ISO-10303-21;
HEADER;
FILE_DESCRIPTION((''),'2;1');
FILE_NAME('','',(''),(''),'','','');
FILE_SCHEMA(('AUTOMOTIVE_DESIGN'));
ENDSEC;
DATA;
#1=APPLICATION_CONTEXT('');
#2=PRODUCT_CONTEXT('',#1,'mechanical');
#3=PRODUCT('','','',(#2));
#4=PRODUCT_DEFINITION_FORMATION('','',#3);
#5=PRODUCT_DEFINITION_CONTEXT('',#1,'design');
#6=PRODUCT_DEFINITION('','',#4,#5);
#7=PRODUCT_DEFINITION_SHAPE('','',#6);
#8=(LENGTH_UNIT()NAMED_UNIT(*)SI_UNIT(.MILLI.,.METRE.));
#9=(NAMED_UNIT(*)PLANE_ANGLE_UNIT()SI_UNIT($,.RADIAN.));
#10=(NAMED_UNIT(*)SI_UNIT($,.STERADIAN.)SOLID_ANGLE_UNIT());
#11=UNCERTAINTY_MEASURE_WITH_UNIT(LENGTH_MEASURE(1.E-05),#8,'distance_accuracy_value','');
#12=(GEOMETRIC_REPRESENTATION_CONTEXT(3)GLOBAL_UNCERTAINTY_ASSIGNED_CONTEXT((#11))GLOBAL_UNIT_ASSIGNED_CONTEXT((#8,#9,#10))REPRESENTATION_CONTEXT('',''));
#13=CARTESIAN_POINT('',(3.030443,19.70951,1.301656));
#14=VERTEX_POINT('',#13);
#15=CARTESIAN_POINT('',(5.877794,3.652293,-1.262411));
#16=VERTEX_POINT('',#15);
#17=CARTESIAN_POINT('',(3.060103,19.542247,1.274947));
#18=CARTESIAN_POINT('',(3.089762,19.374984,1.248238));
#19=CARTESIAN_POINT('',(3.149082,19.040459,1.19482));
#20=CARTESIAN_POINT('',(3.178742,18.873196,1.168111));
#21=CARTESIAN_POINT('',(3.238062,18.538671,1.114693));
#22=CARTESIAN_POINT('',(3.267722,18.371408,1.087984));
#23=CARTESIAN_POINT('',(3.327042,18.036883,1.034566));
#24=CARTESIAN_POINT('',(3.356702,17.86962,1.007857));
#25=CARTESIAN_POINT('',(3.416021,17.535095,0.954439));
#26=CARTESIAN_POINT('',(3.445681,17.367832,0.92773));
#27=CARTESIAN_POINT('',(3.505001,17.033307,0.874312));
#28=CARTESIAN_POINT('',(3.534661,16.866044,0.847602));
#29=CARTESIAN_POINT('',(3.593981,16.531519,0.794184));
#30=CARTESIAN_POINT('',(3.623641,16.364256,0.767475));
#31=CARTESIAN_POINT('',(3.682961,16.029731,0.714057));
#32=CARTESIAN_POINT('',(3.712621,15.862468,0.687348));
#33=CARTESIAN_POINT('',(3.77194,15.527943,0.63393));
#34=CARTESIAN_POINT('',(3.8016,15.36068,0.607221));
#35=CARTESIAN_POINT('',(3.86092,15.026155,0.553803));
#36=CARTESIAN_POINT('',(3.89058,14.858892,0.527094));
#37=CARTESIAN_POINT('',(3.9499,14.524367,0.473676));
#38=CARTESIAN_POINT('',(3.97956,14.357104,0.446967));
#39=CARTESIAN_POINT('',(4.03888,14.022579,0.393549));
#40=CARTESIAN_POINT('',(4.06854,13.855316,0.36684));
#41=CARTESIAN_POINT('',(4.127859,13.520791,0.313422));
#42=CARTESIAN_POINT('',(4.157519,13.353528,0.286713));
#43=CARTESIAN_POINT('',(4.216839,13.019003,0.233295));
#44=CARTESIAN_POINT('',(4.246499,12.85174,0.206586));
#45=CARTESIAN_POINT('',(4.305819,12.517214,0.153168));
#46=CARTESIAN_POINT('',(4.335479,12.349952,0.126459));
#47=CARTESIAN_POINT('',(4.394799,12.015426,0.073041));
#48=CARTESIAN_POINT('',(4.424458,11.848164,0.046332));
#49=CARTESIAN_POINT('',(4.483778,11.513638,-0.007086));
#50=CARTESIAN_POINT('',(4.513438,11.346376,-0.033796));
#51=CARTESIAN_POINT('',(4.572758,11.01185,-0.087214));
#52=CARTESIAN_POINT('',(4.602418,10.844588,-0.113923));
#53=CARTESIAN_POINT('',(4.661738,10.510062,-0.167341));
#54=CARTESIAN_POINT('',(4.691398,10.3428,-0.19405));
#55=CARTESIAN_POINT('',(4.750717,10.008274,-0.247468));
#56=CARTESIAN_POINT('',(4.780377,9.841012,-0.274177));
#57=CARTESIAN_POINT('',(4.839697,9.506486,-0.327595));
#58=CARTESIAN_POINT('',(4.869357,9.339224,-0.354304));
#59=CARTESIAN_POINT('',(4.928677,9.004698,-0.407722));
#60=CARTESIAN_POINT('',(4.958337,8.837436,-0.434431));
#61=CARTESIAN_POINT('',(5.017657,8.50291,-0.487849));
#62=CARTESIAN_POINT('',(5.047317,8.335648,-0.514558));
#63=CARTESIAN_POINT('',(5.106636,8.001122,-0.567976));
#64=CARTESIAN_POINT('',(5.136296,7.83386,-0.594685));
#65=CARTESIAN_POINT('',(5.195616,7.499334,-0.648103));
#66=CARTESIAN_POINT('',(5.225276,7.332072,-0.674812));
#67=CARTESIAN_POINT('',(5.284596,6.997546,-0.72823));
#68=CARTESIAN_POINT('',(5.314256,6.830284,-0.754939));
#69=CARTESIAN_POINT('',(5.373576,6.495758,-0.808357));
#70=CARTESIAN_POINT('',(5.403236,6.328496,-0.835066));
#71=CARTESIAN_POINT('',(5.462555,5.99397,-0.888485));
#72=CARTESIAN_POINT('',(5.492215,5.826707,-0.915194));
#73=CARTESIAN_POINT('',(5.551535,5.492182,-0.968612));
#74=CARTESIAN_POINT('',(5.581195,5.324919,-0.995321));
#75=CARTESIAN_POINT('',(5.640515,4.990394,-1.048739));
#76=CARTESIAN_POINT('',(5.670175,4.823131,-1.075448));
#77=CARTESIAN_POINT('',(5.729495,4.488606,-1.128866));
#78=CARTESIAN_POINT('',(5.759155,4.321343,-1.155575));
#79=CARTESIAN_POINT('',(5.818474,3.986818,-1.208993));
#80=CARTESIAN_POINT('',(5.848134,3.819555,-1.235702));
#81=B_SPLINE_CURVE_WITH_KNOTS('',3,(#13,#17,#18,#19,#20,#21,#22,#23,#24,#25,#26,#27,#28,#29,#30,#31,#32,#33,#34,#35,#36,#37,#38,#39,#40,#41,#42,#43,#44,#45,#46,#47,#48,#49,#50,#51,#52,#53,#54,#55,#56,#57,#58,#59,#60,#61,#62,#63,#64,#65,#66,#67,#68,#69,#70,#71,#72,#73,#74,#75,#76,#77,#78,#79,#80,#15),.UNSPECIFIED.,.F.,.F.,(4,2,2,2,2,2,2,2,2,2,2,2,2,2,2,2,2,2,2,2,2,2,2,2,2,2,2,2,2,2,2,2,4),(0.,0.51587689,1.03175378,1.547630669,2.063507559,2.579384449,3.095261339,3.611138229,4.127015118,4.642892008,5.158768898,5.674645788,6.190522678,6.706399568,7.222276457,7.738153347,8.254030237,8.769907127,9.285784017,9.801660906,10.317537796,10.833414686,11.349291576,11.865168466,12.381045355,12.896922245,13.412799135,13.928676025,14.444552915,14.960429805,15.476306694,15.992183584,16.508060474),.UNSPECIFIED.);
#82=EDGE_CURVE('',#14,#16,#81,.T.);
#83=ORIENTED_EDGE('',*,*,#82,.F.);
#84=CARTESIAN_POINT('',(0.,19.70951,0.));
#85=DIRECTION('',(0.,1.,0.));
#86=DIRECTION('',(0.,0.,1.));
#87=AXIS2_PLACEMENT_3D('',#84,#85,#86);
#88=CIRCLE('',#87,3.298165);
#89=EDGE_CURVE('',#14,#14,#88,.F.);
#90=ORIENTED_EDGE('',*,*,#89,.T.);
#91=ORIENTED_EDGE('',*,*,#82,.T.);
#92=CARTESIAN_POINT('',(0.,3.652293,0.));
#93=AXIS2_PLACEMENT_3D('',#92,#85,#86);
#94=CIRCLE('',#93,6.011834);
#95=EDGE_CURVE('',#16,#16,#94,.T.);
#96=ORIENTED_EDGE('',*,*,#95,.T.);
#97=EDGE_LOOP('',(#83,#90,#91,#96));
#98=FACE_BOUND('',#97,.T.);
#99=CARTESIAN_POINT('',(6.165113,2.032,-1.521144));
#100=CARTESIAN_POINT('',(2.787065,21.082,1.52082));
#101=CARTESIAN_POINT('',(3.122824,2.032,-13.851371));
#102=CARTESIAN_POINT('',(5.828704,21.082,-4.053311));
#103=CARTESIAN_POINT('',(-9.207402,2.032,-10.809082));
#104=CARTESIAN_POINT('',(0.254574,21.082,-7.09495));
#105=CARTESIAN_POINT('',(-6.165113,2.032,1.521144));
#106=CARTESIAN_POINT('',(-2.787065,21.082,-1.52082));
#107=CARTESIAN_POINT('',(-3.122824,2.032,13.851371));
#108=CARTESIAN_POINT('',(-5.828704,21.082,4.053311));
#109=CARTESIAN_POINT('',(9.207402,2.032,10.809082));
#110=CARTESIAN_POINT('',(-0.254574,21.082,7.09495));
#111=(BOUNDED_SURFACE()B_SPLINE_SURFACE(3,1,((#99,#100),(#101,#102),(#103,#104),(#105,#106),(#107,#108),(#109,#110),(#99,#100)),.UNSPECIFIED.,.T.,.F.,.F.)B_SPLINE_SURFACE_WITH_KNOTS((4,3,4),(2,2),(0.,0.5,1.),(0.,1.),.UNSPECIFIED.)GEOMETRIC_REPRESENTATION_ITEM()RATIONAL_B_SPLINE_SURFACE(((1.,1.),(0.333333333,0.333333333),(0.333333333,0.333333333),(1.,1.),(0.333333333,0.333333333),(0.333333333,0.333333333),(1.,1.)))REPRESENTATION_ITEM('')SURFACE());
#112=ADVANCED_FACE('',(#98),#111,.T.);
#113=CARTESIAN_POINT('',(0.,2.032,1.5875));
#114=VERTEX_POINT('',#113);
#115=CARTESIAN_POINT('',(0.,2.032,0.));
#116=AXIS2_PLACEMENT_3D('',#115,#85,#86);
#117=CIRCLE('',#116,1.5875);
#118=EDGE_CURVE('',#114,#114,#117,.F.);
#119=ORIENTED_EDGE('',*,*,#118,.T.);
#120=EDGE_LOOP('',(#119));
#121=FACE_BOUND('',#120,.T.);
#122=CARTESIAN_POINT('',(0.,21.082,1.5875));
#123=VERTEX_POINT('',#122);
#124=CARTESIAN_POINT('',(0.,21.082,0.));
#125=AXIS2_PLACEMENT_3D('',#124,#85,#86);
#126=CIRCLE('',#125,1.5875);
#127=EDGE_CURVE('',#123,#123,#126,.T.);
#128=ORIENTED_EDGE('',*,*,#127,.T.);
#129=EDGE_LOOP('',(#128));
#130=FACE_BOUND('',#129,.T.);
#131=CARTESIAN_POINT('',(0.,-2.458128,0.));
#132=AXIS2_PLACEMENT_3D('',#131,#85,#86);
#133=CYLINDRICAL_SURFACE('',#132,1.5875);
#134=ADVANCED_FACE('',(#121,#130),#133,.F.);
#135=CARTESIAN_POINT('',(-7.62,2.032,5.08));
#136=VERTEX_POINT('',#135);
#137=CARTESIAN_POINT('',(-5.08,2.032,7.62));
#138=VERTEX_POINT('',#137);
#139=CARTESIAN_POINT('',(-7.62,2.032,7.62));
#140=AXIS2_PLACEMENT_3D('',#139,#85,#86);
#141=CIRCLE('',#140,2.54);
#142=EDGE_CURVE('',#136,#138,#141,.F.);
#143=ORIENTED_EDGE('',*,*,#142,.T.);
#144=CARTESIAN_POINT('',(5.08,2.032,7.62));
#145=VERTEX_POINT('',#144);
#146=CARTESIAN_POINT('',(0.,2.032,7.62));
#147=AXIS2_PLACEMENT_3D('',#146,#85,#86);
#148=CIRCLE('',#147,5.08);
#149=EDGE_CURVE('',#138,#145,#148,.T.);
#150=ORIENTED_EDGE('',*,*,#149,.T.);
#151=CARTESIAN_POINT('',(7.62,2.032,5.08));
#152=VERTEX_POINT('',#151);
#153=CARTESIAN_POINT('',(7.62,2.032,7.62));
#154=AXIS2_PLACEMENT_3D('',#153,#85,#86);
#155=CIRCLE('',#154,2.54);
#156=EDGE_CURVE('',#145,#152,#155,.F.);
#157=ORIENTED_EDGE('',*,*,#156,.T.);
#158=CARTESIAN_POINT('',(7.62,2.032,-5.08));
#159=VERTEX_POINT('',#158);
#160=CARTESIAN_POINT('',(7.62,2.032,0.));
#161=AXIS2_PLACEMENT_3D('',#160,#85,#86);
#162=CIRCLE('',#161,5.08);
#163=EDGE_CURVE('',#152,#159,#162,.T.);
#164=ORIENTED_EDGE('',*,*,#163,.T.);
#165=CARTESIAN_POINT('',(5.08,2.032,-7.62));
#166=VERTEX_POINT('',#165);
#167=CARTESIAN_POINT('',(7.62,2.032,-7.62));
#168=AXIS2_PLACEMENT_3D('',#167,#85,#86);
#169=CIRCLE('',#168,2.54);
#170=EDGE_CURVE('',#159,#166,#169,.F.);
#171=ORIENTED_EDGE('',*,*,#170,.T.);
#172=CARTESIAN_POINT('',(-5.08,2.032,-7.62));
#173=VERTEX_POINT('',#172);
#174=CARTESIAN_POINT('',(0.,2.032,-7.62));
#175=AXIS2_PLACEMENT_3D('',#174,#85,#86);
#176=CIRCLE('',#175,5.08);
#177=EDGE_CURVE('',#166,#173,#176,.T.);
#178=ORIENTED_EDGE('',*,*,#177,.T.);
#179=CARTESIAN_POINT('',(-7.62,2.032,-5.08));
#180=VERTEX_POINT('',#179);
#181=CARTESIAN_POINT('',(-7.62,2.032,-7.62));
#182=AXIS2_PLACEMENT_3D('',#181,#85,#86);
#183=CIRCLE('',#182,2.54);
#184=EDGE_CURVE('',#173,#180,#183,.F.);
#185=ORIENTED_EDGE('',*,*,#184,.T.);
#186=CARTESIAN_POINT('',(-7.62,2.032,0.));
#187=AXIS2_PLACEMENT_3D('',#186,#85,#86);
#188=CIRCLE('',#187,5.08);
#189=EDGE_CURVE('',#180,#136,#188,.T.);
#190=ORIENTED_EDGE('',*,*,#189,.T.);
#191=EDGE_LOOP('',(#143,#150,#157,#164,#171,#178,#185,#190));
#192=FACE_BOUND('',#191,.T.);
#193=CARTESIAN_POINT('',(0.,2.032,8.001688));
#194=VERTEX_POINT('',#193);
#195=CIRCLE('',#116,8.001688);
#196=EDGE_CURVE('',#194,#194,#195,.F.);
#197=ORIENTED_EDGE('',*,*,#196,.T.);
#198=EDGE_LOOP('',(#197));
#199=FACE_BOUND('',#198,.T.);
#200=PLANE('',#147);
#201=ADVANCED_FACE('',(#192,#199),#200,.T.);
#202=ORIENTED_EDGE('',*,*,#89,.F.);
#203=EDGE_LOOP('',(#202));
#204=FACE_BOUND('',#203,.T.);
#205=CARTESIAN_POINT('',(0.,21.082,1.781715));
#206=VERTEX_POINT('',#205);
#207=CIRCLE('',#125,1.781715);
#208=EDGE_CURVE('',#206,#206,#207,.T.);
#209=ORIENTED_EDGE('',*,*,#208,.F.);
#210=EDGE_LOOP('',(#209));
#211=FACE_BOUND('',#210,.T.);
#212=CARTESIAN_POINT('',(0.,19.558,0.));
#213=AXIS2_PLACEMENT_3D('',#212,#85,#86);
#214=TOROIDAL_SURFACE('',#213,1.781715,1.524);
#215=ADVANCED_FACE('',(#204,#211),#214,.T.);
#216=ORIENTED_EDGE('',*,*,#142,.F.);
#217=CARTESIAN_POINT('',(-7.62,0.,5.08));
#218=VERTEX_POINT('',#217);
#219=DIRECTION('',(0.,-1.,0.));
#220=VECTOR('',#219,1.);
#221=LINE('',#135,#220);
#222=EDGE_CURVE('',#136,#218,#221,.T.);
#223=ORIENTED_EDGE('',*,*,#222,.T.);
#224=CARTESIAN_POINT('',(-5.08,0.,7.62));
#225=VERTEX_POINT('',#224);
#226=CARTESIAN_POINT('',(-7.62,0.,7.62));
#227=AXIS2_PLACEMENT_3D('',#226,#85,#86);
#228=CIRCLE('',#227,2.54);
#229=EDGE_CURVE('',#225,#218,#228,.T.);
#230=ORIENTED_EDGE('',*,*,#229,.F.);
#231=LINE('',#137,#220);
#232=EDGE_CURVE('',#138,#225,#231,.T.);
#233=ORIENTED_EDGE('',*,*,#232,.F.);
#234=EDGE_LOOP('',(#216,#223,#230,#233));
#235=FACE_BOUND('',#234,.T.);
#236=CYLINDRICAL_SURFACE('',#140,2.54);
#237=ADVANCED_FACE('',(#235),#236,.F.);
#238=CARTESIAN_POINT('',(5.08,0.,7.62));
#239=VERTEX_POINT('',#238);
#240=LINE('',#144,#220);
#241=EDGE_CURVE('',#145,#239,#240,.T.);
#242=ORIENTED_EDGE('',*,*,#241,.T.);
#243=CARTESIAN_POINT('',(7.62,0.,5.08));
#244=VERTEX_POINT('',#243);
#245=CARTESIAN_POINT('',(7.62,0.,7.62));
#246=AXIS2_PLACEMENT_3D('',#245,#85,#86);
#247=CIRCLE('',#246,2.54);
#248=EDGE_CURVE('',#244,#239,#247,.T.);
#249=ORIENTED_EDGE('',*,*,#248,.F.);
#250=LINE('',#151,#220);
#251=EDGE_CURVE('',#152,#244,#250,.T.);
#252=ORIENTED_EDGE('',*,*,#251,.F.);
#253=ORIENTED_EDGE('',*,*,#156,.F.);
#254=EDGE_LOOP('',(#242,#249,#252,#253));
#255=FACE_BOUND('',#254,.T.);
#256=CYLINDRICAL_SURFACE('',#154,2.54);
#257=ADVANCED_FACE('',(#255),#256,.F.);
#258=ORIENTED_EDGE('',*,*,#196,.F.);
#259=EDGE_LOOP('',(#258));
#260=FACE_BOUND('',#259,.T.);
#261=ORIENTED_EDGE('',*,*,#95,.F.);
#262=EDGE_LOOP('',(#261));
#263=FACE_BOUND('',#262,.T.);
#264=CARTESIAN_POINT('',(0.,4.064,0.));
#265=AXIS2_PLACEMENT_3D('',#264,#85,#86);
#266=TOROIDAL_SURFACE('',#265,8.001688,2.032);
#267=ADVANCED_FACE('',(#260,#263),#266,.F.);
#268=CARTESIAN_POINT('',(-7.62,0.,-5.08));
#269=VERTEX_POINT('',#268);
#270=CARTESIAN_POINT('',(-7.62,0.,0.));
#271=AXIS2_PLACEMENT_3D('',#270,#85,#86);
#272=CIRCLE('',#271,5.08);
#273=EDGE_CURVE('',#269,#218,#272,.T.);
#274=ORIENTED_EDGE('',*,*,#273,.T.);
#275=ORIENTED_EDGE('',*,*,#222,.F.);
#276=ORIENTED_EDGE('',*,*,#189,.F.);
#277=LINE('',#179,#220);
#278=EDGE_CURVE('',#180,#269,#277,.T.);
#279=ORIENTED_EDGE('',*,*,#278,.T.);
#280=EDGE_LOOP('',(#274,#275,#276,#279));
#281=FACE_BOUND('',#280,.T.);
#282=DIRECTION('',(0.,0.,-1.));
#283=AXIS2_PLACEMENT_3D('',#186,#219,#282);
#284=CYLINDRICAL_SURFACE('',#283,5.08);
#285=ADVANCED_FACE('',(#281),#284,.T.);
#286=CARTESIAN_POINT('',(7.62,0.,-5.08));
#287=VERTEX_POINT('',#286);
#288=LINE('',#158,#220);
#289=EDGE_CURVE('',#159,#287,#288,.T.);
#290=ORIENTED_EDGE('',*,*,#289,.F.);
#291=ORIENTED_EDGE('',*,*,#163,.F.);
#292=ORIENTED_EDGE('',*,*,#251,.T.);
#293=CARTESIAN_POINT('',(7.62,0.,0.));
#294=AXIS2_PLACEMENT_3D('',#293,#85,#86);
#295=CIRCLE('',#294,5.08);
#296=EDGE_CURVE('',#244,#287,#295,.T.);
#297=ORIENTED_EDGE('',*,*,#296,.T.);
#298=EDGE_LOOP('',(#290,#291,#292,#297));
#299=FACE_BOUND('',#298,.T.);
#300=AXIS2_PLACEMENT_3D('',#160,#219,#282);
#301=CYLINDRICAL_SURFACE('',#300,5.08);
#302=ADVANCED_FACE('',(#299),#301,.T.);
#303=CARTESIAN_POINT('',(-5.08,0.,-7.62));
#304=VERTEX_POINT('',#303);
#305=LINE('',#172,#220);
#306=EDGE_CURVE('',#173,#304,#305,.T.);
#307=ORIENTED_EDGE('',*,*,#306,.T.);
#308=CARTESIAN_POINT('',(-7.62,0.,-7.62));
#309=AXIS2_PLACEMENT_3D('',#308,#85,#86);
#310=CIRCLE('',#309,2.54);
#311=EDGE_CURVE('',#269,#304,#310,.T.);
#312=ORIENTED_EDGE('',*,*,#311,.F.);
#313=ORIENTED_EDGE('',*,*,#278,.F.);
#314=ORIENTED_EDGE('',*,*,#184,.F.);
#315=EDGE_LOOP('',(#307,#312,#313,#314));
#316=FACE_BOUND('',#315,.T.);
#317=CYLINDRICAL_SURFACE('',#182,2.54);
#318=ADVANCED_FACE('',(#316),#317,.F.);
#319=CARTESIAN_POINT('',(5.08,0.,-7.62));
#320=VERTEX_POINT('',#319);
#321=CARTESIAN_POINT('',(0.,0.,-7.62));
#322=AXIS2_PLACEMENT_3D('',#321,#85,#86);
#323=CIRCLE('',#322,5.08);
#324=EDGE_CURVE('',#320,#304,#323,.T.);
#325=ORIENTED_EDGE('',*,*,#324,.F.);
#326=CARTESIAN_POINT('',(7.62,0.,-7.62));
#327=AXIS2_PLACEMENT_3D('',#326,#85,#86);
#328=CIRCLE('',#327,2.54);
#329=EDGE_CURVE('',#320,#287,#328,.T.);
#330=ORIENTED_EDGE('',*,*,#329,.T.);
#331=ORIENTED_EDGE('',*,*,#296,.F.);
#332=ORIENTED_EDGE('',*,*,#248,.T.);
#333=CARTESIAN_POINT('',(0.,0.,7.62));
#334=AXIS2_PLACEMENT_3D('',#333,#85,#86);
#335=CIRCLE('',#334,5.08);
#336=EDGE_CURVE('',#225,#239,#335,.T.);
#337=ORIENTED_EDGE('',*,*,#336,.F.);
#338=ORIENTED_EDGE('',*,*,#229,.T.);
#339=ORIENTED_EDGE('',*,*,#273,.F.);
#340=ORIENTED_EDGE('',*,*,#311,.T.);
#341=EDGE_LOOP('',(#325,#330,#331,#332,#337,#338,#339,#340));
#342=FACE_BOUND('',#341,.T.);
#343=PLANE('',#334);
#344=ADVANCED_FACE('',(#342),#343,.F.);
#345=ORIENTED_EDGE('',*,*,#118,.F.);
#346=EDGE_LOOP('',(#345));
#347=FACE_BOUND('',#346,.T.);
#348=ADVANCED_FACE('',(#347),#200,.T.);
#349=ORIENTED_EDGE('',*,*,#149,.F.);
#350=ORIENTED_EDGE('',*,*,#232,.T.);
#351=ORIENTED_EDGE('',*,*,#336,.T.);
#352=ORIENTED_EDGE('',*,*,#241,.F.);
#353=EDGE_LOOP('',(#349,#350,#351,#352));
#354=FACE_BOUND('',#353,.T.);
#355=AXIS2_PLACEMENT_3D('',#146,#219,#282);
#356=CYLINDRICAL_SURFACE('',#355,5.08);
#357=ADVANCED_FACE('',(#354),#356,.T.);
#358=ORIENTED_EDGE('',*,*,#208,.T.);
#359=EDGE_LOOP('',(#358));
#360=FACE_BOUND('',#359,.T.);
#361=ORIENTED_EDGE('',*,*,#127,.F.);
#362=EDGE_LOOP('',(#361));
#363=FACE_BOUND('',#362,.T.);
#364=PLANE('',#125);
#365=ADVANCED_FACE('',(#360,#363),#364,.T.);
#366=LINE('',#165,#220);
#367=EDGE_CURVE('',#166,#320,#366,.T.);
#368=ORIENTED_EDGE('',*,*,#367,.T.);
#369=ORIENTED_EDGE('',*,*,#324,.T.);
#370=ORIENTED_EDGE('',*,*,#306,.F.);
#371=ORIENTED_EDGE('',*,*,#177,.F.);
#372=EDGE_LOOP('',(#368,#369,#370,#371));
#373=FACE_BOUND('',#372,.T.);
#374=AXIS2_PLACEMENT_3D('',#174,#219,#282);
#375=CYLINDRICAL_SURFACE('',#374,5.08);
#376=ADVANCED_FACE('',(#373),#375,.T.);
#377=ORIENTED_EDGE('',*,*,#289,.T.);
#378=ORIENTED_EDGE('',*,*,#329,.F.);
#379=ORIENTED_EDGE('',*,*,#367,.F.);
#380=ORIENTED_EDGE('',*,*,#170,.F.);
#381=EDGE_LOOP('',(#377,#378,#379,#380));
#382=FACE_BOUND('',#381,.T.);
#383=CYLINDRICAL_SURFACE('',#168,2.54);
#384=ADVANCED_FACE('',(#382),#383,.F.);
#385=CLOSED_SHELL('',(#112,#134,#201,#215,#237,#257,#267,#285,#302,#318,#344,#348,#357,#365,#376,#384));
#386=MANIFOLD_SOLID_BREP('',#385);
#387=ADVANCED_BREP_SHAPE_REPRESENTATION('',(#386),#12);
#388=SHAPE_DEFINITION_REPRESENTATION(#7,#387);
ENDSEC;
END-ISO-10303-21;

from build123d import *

# Parameters (mm, degrees)
BOSS_EXTRUDE1_DEPTH = 2.032
FILLET1_R           = 2.54
SKETCH4_R           = 1.5875
CUT_EXTRUDE1_DEPTH  = 19.05
FILLET6_R           = 2.032
FILLET7_R           = 1.524


with BuildPart() as part:
    # Sketch1 → Boss-Extrude1 (new body)
    with BuildSketch(Plane(origin=(0, 0, 0), x_dir=(1, 0, 0), z_dir=(0, 1, 0))):
        with BuildLine():
            Line((-5.08, -7.62), (-5.08, -5.08))
            Line((-5.08, -5.08), (-7.62, -5.08))
            ThreePointArc((-7.62, -5.08), (-12.7, 0), (-7.62, 5.08))
            Line((-7.62, 5.08), (-5.08, 5.08))
            Line((-5.08, 5.08), (-5.08, 7.62))
            ThreePointArc((-5.08, 7.62), (0, 12.7), (5.08, 7.62))
            Line((5.08, 7.62), (5.08, 5.08))
            Line((5.08, 5.08), (7.62, 5.08))
            ThreePointArc((7.62, 5.08), (12.7, 0), (7.62, -5.08))
            Line((7.62, -5.08), (5.08, -5.08))
            Line((5.08, -5.08), (5.08, -7.62))
            ThreePointArc((5.08, -7.62), (0, -12.7), (-5.08, -7.62))
        make_face()
    extrude(amount=BOSS_EXTRUDE1_DEPTH)

    # Fillet1
    fillet1_edges = [part.edges().sort_by_distance(p)[0] for p in [
        (-5.08, 1.016, -5.08),
        (-5.08, 1.016, 5.08),
        (5.08, 1.016, 5.08),
        (5.08, 1.016, -5.08),
    ]]
    fillet(fillet1_edges, radius=FILLET1_R - 0.0001)  # a hair under: the kernel refuses the full size

    # Loft1: read off the stored shape, not the designer's step
    # Loft1: loft between two sections, ruled curve by curve
    loft1_from = [
        Edge.make_bspline([(6.165113119, 2.032, -1.52114438), (3.12282436, 2.032, -13.851370619), (-9.207401879, 2.032, -10.809081859), (-6.165113119, 2.032, 1.52114438), (-3.12282436, 2.032, 13.851370619), (9.207401879, 2.032, 10.809081859), (6.165113119, 2.032, -1.52114438)], [0, 0, 0, 0, 0.5, 0.5, 0.5, 1, 1, 1, 1], 3, [1, 0.333333333, 0.333333333, 1, 0.333333333, 0.333333333, 1]),
    ]
    loft1_to = [
        Edge.make_bspline([(2.787065251, 21.082, 1.520819611), (5.828704472, 21.082, -4.05331089), (0.254573971, 21.082, -7.094950112), (-2.787065251, 21.082, -1.520819611), (-5.828704472, 21.082, 4.05331089), (-0.254573971, 21.082, 7.094950112), (2.787065251, 21.082, 1.520819611)], [0, 0, 0, 0, 0.5, 0.5, 0.5, 1, 1, 1, 1], 3, [1, 0.333333333, 0.333333333, 1, 0.333333333, 0.333333333, 1]),
    ]
    loft1 = Solid(Shell([*[Face.make_surface_from_curves(loft1_from[k], loft1_to[k]) for k in range(1)], Face(Wire(loft1_from)), Face(Wire(loft1_to))]))
    add(loft1)

    # Sketch4 → Cut-Extrude1 (cut)
    with BuildSketch(Plane(origin=(0, 21.082, 0), x_dir=(1, 0, 0), z_dir=(0, 1, 0))):
        with Locations(Location((0, 0, 0), (0, 0, 270))):
            Circle(SKETCH4_R)
    extrude(amount=-CUT_EXTRUDE1_DEPTH, mode=Mode.SUBTRACT)

    # Fillet6
    fillet6_edges = [part.edges().sort_by_distance(p)[0] for p in [
        (-6.165113119, 2.032, 1.52114438),
    ]]
    fillet(fillet6_edges, radius=FILLET6_R)

    # Fillet7
    fillet7_edges = [part.edges().sort_by_distance(p)[0] for p in [
        (-2.787065251, 21.082, -1.520819611),
    ]]
    fillet(fillet7_edges, radius=FILLET7_R)


solid = part.part
